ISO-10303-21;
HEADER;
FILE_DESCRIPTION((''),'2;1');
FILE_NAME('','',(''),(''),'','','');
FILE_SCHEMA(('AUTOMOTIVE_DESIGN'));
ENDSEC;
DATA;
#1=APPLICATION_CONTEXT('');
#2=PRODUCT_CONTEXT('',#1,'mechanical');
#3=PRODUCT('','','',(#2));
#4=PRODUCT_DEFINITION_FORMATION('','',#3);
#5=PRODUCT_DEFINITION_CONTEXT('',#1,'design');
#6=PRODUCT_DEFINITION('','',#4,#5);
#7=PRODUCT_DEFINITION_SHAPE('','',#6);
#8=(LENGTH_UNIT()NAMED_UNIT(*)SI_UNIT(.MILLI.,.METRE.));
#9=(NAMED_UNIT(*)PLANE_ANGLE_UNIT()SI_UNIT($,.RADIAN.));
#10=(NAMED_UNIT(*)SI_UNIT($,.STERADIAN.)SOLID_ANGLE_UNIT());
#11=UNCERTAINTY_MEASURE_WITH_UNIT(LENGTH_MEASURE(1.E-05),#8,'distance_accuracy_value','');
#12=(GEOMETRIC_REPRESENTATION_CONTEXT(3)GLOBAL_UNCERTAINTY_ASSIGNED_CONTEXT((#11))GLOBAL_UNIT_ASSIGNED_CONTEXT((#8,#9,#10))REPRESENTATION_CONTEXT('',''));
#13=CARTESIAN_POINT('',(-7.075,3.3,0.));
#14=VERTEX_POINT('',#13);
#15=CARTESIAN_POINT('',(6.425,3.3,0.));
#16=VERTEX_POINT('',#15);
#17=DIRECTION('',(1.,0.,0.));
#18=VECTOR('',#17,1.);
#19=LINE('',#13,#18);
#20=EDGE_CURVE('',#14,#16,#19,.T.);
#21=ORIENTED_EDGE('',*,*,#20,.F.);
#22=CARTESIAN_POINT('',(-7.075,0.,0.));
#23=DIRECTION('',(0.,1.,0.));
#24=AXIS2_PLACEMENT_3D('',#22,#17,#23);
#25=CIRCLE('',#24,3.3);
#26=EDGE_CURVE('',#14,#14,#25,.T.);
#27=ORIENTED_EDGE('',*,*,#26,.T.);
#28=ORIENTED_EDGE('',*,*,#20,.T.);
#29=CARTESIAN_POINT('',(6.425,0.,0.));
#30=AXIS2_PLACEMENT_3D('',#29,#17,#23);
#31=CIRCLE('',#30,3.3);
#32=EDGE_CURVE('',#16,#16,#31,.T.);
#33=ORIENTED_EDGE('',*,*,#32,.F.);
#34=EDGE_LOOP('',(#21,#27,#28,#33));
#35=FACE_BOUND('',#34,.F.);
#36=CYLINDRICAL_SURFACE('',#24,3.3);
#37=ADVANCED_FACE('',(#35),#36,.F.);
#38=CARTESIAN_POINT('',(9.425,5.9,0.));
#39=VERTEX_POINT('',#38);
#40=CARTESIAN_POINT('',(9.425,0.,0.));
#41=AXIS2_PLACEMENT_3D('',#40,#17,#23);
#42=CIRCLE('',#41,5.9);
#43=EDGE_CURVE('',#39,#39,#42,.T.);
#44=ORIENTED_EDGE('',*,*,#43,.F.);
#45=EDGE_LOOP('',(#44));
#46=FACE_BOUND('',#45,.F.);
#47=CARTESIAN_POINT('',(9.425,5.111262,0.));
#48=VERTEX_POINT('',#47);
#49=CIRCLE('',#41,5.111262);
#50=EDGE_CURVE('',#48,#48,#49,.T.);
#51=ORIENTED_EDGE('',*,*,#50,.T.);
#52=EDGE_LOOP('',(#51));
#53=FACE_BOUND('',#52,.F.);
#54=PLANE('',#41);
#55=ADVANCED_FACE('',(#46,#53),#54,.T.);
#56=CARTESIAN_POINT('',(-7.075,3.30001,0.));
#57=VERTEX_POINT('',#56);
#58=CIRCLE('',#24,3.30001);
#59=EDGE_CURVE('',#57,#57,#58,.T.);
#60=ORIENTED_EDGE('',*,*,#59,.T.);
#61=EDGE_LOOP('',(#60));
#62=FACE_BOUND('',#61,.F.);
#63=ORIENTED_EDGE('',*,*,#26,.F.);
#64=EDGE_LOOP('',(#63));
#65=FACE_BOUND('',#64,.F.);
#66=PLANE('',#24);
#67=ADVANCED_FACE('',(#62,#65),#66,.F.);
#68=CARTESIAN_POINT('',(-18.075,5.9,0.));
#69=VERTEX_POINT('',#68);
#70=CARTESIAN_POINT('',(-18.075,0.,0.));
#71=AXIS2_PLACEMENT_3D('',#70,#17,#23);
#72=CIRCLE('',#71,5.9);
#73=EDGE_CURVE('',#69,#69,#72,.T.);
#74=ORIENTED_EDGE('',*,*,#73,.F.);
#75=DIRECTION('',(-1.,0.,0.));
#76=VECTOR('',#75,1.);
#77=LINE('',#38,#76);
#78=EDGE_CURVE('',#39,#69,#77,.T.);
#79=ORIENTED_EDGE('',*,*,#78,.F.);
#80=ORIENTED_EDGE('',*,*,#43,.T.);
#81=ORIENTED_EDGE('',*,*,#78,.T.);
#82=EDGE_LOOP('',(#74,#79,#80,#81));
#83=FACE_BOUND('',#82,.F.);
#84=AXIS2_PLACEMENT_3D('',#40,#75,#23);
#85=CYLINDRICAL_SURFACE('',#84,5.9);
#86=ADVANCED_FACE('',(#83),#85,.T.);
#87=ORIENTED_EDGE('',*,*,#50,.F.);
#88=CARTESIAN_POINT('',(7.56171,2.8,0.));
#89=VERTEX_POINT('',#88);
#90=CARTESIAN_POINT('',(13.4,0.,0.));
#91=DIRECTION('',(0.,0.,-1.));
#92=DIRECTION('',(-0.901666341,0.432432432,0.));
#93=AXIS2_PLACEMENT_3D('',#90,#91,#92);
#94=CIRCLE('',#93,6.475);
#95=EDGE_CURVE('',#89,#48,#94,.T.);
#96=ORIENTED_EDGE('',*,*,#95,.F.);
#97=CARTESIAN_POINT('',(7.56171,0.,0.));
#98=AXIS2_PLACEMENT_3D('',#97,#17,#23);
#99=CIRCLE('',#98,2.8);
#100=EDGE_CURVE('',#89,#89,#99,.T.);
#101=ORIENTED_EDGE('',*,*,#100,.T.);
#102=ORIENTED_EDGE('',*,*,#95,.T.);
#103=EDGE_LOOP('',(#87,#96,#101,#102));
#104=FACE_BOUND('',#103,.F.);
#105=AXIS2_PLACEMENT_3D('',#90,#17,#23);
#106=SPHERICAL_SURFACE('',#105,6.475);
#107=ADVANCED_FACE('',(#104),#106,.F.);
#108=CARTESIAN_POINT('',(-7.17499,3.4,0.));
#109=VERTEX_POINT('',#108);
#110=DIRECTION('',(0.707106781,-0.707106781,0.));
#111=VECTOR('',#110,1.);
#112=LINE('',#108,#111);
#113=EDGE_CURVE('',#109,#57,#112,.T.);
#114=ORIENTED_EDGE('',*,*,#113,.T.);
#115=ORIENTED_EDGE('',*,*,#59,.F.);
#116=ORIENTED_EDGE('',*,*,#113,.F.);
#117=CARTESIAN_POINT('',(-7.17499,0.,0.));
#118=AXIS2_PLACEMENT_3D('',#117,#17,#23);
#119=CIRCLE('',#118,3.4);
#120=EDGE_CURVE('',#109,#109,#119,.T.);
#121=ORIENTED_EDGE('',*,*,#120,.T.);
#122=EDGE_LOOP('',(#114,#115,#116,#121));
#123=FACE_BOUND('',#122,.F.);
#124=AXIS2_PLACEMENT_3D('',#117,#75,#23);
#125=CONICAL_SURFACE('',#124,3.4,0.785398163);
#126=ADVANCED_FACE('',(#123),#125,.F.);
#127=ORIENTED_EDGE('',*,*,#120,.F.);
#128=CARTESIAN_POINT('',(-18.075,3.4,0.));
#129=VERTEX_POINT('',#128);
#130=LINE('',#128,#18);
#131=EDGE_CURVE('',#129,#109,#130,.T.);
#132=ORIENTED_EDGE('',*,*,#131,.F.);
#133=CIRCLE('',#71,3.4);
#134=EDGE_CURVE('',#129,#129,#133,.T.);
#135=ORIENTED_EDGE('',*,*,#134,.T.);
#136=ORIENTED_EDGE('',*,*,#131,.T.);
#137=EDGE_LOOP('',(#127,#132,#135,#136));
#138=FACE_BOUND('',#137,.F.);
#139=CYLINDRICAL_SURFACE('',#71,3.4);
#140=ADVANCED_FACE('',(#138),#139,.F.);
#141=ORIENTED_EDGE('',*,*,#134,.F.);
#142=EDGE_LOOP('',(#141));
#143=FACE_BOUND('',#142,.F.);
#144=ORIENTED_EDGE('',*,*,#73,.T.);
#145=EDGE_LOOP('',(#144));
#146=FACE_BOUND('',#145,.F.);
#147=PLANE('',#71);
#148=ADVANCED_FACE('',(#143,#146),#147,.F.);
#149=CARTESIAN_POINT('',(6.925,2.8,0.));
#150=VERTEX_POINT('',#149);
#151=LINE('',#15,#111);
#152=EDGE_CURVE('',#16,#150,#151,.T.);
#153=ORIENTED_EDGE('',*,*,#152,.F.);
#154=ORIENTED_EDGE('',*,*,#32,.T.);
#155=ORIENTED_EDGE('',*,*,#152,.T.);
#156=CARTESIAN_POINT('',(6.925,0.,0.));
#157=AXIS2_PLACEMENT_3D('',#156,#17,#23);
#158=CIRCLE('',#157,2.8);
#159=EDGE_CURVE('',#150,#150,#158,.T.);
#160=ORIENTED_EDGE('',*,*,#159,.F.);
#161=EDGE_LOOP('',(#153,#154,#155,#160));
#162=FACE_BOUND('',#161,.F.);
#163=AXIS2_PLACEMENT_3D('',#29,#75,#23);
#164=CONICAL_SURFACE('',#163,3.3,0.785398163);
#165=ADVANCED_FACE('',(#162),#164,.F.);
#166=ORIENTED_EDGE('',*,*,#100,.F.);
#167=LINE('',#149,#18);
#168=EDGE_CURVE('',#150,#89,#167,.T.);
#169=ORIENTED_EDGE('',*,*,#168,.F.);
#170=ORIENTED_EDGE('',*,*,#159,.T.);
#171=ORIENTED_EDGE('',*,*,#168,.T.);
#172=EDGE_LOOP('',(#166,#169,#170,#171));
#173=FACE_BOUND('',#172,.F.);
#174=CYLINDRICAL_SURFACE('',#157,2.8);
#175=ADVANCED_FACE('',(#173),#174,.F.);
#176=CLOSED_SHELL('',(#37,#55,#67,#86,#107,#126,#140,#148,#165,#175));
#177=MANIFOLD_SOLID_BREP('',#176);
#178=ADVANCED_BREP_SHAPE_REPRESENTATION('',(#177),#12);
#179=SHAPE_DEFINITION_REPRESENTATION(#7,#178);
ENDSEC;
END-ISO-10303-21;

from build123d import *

# Parameters (mm, degrees)
F2_SIZE = 0.09999


# Not quite as in the source:
# - a fillet or chamfer is up to 0.001 mm smaller than in the source, because OpenCascade refuses the exact size


with BuildPart() as f1:
    # F0 (on Top) → F1 (revolve)
    with BuildSketch(Plane.XY):
        Polygon((6.425, 3.3), (6.925, 2.8), (6.925, 3.3), align=None)
        with BuildLine():
            ThreePointArc((7.5617104388, 2.8), (8.3591026496, 4.0638625595), (9.425, 5.1112620751))
            Line((9.425, 5.1112620751), (9.425, 5.9))
            Line((9.425, 5.9), (-18.075, 5.9))
            Line((-18.075, 5.9), (-18.075, 3.4))
            Line((-18.075, 3.4), (-7.075, 3.4))
            Line((-7.075, 3.4), (-7.075, 3.3))
            Line((-7.075, 3.3), (-6.425, 3.3))
            Line((-6.425, 3.3), (6.425, 3.3))
            Line((6.425, 3.3), (6.925, 3.3))
            Line((6.925, 3.3), (6.925, 2.8))
            Line((6.925, 2.8), (7.5617104388, 2.8))
        make_face()
    revolve(axis=Axis((1.3457932509, 0, 0), (1, 0, 0)))

    # F2 (size 0.1 in the source; OpenCascade refuses exactly that, so slightly less here)
    f2_edges = [f1.edges().sort_by_distance(p)[0] for p in [
        (-7.075, -3.4, 0),
    ]]
    chamfer(f2_edges, length=F2_SIZE)


solid = f1.part
